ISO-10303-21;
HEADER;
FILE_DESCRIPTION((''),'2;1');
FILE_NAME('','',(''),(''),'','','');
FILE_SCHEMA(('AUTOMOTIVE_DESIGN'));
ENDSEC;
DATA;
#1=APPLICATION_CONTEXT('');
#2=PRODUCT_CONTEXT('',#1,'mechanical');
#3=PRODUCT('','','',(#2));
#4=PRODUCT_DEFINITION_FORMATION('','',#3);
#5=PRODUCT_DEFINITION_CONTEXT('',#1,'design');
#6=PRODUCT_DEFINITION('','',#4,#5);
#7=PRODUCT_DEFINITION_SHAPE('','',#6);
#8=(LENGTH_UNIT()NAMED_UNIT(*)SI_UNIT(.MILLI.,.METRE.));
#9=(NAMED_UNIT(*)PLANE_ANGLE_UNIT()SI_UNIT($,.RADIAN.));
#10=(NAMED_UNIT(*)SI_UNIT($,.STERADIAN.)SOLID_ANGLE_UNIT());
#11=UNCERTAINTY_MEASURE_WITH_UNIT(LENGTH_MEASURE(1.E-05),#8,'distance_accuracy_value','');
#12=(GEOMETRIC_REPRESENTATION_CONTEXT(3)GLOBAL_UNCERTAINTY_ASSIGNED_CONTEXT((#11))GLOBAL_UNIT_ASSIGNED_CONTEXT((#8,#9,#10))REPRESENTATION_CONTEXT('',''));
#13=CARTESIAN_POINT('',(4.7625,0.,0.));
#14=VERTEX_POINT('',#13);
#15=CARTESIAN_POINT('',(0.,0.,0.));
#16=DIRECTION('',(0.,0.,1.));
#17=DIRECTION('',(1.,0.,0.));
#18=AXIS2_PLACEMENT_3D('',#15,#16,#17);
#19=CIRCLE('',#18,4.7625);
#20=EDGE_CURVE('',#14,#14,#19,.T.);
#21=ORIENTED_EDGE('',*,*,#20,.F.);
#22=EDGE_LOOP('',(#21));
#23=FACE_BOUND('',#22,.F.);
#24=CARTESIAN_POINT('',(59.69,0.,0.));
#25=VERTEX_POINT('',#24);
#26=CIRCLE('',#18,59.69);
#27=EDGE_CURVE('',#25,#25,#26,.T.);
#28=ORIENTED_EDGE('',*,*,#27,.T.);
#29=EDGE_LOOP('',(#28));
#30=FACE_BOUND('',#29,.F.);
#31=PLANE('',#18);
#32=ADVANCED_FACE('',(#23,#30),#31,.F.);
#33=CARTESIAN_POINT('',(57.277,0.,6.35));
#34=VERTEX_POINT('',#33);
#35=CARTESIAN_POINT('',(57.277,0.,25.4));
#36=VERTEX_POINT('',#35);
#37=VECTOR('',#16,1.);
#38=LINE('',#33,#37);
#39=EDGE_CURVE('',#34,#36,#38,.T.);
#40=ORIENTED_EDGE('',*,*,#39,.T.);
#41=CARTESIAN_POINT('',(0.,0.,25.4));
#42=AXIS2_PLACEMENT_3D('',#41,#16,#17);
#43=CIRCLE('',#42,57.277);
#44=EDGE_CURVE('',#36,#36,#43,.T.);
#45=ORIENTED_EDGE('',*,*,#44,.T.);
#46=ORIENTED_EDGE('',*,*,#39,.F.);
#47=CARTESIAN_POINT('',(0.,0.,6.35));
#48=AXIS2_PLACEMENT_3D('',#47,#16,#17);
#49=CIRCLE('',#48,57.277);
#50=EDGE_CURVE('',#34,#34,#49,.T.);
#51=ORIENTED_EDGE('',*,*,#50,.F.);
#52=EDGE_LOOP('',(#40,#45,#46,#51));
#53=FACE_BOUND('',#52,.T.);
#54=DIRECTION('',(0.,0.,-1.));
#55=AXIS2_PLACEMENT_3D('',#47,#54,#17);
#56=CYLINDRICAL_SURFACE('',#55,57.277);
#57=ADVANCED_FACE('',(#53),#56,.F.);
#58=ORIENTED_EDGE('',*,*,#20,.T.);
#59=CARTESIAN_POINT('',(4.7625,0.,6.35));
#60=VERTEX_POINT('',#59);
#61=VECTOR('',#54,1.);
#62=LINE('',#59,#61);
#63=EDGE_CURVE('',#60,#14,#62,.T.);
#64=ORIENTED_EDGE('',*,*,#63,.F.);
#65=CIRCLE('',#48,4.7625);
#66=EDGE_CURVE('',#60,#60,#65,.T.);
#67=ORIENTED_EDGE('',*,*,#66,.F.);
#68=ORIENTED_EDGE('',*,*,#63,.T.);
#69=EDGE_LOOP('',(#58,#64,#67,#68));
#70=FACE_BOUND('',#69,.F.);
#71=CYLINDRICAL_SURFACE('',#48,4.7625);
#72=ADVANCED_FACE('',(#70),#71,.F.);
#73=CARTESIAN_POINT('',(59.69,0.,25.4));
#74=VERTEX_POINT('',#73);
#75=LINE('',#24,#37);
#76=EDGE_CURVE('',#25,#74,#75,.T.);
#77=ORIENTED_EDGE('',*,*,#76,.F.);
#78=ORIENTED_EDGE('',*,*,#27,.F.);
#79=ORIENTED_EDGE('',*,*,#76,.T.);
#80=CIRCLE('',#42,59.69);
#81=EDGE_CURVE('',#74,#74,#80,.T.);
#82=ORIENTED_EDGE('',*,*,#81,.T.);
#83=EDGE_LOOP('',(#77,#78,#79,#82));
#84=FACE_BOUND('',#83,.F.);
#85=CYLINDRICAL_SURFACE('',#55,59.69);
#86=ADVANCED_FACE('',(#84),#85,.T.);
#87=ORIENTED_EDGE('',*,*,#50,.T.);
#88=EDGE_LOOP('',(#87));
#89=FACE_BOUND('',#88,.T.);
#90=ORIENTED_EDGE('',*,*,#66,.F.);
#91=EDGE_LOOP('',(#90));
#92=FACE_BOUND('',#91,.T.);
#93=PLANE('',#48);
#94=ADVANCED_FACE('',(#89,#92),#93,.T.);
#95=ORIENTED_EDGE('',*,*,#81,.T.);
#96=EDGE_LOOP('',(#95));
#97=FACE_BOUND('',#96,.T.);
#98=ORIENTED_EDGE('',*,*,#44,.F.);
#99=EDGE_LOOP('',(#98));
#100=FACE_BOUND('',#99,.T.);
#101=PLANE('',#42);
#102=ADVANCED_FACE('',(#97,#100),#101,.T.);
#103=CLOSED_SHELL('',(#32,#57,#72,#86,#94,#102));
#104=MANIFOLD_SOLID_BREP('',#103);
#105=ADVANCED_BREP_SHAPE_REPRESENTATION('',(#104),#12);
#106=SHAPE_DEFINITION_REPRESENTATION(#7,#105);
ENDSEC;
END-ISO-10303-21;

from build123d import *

# Parameters (mm, degrees)
F0_R     = 59.69
F1_DEPTH = 6.35
F2_R     = 59.69
F2_R_2   = 57.277
F3_DEPTH = 19.05
F4_R     = 4.7625
F5_DEPTH = 25.4


# Not quite as in the source:
# - a feature names something its author has since deleted; it is built from what else it names


with BuildPart() as f1:
    # F0 (on Top) → F1 (new body)
    with BuildSketch(Plane.XY):
        Circle(F0_R)
    extrude(amount=F1_DEPTH)

    # F2 (on face) → F3 (join)
    with BuildSketch(Plane.XY.offset(6.35)):
        Circle(F2_R)
        Circle(F2_R_2, mode=Mode.SUBTRACT)
    extrude(amount=F3_DEPTH)

    # F4 (on face) → F5 (cut)
    with BuildSketch(Plane.XY.offset(6.35)):
        Circle(F4_R)
    extrude(amount=-F5_DEPTH, mode=Mode.SUBTRACT)


solid = f1.part
